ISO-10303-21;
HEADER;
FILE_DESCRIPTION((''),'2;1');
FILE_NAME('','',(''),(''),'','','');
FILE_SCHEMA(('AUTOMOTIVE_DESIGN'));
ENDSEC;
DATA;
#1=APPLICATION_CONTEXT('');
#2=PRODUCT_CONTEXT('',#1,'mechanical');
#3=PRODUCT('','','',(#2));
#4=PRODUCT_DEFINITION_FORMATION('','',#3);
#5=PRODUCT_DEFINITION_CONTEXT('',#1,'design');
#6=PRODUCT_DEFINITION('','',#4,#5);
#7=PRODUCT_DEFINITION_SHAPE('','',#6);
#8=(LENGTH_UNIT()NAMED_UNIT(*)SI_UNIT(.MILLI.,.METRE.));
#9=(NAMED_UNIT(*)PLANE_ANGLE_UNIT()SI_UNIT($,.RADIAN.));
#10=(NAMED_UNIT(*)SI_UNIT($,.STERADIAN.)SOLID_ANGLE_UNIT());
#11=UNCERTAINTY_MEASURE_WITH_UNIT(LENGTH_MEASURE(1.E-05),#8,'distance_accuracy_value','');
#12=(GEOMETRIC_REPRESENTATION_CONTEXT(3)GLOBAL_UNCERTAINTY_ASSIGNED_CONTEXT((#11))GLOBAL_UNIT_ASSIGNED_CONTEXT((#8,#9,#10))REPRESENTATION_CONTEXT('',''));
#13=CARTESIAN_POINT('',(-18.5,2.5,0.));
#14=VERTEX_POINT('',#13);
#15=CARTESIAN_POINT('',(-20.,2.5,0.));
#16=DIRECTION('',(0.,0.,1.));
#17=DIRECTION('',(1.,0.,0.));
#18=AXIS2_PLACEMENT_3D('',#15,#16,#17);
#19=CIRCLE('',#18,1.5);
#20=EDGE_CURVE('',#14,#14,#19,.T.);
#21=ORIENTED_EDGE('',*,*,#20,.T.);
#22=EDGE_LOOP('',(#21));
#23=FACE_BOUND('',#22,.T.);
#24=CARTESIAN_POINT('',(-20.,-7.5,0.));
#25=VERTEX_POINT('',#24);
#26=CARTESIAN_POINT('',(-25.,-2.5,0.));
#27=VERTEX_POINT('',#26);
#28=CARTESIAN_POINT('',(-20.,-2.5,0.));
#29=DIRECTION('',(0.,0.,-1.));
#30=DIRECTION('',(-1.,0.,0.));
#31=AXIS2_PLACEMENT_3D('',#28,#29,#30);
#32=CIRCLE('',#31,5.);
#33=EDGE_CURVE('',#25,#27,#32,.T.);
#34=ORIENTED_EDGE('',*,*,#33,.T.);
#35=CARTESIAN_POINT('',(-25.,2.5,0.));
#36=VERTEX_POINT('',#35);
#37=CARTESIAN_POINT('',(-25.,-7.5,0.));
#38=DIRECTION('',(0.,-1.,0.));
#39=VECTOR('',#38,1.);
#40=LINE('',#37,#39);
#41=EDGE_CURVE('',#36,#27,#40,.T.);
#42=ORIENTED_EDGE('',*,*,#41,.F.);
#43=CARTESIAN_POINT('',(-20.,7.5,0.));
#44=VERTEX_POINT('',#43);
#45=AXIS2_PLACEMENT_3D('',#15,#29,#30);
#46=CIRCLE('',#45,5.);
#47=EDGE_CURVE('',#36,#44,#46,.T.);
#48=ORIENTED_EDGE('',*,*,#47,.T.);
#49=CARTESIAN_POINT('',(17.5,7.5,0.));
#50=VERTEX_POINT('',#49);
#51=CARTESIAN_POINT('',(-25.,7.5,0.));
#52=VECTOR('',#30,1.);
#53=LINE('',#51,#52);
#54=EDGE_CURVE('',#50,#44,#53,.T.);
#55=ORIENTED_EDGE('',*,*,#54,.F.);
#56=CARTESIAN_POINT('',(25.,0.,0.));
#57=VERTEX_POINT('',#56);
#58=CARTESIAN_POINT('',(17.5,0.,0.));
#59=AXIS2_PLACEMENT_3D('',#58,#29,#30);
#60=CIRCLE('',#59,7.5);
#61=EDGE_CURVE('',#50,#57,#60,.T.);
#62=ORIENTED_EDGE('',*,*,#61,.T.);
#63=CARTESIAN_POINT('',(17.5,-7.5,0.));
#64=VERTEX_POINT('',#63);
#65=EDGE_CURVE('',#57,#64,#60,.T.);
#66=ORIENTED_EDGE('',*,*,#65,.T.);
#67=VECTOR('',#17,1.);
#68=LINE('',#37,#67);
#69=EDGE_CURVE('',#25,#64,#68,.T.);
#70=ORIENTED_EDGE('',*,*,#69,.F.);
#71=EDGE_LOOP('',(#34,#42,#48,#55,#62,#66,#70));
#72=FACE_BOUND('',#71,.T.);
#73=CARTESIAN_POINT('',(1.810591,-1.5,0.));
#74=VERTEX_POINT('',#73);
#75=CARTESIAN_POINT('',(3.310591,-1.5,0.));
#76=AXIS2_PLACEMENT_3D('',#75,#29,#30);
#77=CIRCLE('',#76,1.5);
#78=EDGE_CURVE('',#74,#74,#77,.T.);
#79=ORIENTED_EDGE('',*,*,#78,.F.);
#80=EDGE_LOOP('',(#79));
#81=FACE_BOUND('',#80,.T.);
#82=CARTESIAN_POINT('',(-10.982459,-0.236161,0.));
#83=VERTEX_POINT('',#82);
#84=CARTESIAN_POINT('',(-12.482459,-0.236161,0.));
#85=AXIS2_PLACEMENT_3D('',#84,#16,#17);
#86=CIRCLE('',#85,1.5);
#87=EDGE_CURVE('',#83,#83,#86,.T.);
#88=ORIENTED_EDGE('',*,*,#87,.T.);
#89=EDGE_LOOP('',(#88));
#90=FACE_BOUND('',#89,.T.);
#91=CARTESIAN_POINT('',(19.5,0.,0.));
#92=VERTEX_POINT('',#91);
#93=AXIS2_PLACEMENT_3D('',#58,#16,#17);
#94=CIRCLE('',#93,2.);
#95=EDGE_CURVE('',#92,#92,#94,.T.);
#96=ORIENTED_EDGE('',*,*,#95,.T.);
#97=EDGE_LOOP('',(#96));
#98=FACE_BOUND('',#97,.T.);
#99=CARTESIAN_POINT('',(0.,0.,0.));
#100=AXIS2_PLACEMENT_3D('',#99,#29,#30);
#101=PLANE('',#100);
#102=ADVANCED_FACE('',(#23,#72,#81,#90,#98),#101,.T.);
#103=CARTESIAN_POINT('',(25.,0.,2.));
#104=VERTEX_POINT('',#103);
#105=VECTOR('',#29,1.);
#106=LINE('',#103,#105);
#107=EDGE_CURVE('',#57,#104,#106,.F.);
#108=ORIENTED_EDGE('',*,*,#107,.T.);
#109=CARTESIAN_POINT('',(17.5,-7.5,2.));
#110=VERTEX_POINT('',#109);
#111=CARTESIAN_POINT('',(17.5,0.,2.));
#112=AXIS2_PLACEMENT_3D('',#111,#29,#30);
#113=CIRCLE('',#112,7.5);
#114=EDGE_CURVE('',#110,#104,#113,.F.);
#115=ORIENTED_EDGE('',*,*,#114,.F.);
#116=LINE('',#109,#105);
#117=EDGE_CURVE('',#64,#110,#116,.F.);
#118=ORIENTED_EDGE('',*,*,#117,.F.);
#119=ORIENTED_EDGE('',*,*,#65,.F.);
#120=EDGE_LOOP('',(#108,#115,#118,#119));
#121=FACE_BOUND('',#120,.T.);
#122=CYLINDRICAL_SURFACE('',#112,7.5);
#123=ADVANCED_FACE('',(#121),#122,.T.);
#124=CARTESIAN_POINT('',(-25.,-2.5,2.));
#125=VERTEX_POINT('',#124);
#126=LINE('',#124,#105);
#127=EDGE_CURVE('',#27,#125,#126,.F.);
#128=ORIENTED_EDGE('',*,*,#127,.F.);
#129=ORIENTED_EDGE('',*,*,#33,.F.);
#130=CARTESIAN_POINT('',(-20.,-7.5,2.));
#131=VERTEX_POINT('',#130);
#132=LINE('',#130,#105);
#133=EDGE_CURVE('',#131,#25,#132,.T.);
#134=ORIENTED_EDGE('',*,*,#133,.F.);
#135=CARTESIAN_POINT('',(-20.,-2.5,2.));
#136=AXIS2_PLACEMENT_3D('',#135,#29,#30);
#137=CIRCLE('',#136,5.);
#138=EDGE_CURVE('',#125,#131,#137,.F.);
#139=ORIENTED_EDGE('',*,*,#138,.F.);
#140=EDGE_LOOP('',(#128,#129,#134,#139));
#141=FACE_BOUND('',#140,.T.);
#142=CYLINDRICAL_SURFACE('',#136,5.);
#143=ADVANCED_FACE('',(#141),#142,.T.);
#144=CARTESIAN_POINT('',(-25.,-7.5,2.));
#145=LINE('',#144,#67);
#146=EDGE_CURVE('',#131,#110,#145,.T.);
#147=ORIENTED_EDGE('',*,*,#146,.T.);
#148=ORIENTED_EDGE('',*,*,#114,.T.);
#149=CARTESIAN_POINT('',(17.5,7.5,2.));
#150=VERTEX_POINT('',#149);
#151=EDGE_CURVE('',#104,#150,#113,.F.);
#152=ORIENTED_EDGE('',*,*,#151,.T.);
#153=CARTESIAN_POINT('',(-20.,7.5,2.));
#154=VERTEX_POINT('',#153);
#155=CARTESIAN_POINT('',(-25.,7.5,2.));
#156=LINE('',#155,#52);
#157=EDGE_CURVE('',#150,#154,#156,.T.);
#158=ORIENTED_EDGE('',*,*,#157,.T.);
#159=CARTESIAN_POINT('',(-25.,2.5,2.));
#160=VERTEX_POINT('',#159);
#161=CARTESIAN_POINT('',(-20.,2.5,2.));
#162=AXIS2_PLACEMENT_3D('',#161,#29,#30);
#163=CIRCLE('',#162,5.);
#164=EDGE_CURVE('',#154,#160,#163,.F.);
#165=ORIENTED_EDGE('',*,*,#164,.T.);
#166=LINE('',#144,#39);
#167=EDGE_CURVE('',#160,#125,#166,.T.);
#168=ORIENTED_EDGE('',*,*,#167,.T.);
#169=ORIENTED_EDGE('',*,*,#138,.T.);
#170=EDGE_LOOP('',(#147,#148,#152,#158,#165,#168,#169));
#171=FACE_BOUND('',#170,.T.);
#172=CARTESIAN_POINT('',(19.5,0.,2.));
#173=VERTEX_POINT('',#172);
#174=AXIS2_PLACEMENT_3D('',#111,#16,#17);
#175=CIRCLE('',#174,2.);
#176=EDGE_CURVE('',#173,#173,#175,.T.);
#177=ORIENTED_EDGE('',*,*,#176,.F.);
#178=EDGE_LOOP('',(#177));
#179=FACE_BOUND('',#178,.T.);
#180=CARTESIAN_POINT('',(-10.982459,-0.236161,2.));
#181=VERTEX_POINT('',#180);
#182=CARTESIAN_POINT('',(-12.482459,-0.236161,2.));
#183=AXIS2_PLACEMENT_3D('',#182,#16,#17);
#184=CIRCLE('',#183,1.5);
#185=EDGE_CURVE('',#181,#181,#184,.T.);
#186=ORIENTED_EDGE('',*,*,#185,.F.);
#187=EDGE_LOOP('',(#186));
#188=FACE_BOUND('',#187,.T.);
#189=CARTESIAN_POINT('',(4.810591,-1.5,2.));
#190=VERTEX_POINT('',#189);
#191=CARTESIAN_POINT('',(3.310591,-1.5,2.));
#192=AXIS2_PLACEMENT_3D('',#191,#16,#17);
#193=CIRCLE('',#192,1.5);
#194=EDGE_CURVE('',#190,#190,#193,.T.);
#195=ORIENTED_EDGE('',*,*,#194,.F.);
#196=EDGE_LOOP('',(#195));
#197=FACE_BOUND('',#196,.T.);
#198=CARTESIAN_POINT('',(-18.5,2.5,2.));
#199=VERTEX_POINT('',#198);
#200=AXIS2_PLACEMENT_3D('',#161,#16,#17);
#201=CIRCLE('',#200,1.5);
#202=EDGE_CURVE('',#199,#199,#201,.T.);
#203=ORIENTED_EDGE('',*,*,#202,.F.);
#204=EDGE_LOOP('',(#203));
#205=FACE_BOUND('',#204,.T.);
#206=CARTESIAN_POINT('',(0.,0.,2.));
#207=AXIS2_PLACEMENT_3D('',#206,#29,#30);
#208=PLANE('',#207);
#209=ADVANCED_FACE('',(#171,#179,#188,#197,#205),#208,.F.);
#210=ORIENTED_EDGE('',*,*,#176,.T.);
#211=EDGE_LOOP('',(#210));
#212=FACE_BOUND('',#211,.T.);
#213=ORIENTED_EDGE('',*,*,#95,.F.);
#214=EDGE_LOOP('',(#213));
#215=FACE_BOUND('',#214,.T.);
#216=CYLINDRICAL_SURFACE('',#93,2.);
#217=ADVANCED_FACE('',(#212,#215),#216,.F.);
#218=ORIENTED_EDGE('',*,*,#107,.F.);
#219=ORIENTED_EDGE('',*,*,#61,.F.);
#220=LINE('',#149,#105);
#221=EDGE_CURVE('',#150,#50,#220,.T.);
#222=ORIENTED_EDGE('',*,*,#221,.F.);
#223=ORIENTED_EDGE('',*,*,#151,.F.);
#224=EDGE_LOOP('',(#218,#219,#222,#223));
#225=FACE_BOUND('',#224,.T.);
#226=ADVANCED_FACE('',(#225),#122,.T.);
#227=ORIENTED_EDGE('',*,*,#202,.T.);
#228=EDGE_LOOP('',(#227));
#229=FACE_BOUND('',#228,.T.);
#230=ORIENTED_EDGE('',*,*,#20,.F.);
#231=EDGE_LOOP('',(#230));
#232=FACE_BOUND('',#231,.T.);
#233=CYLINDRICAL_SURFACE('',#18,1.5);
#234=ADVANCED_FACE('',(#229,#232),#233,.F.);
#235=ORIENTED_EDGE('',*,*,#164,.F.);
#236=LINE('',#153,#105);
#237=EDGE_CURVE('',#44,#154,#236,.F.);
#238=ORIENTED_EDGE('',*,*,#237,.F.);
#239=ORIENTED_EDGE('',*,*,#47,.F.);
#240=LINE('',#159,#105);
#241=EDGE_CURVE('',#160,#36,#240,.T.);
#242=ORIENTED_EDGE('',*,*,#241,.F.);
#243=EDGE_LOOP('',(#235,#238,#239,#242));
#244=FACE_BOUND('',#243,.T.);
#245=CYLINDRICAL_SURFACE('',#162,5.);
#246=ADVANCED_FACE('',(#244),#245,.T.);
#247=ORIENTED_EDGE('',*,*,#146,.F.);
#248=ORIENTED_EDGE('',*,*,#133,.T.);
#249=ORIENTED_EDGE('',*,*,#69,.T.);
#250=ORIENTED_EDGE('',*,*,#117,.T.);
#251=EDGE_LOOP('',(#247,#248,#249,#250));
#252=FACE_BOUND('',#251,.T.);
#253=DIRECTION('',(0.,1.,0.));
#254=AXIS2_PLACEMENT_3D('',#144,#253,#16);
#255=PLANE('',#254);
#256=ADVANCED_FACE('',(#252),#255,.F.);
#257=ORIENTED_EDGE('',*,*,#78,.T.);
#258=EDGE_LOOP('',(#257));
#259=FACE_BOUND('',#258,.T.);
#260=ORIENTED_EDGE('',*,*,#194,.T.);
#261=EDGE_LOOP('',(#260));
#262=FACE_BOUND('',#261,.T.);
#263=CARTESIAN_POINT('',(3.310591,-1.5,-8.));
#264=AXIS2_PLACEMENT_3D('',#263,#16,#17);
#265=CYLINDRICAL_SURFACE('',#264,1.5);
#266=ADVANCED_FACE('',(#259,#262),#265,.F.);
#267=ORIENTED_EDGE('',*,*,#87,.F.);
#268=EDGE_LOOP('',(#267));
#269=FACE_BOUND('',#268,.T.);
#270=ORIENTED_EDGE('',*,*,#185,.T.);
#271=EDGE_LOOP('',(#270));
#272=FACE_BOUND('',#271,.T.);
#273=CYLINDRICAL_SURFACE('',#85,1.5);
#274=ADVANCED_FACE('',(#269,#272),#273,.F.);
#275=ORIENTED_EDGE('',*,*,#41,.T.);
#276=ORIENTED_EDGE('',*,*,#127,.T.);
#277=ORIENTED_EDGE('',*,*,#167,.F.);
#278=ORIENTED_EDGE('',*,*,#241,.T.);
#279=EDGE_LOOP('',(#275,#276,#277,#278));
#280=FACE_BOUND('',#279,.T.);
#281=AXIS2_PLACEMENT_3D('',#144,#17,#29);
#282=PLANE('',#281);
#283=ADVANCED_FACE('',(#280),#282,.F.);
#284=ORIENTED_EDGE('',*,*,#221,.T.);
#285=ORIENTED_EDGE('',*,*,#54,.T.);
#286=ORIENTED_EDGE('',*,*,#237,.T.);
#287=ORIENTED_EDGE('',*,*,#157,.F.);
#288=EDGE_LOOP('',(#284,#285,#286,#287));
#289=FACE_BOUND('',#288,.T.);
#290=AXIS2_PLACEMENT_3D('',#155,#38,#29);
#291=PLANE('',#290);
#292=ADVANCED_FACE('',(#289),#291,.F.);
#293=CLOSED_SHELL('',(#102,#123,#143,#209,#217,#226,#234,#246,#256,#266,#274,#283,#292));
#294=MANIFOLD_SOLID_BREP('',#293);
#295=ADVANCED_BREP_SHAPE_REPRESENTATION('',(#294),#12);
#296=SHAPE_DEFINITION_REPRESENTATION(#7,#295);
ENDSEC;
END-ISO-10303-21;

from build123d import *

# Parameters (mm, degrees)
SKETCH_1_W          = 50
SKETCH_1_H          = 15
EXTRUDE_1_DEPTH     = 2
FILLET_1_R          = 5
FILLET_2_R          = 7.5
SKETCH_3_R          = 1.5
SKETCH_3_R_2        = 2
CUT_EXTRUDE_1_DEPTH = 2
SKETCH_4_R          = 1.5
CUT_EXTRUDE_2_DEPTH = 10


with BuildPart() as part:
    # 草图1 → 凸台-拉伸1 (new body)
    with BuildSketch(Plane.XY):
        Rectangle(SKETCH_1_W, SKETCH_1_H)
    extrude(amount=EXTRUDE_1_DEPTH)

    # 圆角1
    fillet_1_edges = [part.edges().sort_by_distance(p)[0] for p in [
        (-25, -7.5, 1),
        (-25, 7.5, 1),
    ]]
    fillet(fillet_1_edges, radius=FILLET_1_R)

    # 圆角2
    fillet_2_edges = [part.edges().sort_by_distance(p)[0] for p in [
        (25, -7.5, 1),
        (25, 7.5, 1),
    ]]
    fillet(fillet_2_edges, radius=FILLET_2_R - 0.0001)  # a hair under: the kernel refuses the full size

    # 草图3 → 切除-拉伸1 (cut)
    with BuildSketch(Plane.XY.offset(2)):
        with Locations((-20, 2.5)):
            Circle(SKETCH_3_R)
        with Locations((-12.482459034, -0.236161147)):
            Circle(SKETCH_3_R)
        with Locations((17.5, 0)):
            Circle(SKETCH_3_R_2)
    extrude(amount=-CUT_EXTRUDE_1_DEPTH, mode=Mode.SUBTRACT)

    # 草图4 → 切除-拉伸2 (cut)
    with BuildSketch(Plane.XY.offset(2)):
        with Locations((3.310591225, -1.5)):
            Circle(SKETCH_4_R)
    extrude(amount=-CUT_EXTRUDE_2_DEPTH, mode=Mode.SUBTRACT)


solid = part.part
